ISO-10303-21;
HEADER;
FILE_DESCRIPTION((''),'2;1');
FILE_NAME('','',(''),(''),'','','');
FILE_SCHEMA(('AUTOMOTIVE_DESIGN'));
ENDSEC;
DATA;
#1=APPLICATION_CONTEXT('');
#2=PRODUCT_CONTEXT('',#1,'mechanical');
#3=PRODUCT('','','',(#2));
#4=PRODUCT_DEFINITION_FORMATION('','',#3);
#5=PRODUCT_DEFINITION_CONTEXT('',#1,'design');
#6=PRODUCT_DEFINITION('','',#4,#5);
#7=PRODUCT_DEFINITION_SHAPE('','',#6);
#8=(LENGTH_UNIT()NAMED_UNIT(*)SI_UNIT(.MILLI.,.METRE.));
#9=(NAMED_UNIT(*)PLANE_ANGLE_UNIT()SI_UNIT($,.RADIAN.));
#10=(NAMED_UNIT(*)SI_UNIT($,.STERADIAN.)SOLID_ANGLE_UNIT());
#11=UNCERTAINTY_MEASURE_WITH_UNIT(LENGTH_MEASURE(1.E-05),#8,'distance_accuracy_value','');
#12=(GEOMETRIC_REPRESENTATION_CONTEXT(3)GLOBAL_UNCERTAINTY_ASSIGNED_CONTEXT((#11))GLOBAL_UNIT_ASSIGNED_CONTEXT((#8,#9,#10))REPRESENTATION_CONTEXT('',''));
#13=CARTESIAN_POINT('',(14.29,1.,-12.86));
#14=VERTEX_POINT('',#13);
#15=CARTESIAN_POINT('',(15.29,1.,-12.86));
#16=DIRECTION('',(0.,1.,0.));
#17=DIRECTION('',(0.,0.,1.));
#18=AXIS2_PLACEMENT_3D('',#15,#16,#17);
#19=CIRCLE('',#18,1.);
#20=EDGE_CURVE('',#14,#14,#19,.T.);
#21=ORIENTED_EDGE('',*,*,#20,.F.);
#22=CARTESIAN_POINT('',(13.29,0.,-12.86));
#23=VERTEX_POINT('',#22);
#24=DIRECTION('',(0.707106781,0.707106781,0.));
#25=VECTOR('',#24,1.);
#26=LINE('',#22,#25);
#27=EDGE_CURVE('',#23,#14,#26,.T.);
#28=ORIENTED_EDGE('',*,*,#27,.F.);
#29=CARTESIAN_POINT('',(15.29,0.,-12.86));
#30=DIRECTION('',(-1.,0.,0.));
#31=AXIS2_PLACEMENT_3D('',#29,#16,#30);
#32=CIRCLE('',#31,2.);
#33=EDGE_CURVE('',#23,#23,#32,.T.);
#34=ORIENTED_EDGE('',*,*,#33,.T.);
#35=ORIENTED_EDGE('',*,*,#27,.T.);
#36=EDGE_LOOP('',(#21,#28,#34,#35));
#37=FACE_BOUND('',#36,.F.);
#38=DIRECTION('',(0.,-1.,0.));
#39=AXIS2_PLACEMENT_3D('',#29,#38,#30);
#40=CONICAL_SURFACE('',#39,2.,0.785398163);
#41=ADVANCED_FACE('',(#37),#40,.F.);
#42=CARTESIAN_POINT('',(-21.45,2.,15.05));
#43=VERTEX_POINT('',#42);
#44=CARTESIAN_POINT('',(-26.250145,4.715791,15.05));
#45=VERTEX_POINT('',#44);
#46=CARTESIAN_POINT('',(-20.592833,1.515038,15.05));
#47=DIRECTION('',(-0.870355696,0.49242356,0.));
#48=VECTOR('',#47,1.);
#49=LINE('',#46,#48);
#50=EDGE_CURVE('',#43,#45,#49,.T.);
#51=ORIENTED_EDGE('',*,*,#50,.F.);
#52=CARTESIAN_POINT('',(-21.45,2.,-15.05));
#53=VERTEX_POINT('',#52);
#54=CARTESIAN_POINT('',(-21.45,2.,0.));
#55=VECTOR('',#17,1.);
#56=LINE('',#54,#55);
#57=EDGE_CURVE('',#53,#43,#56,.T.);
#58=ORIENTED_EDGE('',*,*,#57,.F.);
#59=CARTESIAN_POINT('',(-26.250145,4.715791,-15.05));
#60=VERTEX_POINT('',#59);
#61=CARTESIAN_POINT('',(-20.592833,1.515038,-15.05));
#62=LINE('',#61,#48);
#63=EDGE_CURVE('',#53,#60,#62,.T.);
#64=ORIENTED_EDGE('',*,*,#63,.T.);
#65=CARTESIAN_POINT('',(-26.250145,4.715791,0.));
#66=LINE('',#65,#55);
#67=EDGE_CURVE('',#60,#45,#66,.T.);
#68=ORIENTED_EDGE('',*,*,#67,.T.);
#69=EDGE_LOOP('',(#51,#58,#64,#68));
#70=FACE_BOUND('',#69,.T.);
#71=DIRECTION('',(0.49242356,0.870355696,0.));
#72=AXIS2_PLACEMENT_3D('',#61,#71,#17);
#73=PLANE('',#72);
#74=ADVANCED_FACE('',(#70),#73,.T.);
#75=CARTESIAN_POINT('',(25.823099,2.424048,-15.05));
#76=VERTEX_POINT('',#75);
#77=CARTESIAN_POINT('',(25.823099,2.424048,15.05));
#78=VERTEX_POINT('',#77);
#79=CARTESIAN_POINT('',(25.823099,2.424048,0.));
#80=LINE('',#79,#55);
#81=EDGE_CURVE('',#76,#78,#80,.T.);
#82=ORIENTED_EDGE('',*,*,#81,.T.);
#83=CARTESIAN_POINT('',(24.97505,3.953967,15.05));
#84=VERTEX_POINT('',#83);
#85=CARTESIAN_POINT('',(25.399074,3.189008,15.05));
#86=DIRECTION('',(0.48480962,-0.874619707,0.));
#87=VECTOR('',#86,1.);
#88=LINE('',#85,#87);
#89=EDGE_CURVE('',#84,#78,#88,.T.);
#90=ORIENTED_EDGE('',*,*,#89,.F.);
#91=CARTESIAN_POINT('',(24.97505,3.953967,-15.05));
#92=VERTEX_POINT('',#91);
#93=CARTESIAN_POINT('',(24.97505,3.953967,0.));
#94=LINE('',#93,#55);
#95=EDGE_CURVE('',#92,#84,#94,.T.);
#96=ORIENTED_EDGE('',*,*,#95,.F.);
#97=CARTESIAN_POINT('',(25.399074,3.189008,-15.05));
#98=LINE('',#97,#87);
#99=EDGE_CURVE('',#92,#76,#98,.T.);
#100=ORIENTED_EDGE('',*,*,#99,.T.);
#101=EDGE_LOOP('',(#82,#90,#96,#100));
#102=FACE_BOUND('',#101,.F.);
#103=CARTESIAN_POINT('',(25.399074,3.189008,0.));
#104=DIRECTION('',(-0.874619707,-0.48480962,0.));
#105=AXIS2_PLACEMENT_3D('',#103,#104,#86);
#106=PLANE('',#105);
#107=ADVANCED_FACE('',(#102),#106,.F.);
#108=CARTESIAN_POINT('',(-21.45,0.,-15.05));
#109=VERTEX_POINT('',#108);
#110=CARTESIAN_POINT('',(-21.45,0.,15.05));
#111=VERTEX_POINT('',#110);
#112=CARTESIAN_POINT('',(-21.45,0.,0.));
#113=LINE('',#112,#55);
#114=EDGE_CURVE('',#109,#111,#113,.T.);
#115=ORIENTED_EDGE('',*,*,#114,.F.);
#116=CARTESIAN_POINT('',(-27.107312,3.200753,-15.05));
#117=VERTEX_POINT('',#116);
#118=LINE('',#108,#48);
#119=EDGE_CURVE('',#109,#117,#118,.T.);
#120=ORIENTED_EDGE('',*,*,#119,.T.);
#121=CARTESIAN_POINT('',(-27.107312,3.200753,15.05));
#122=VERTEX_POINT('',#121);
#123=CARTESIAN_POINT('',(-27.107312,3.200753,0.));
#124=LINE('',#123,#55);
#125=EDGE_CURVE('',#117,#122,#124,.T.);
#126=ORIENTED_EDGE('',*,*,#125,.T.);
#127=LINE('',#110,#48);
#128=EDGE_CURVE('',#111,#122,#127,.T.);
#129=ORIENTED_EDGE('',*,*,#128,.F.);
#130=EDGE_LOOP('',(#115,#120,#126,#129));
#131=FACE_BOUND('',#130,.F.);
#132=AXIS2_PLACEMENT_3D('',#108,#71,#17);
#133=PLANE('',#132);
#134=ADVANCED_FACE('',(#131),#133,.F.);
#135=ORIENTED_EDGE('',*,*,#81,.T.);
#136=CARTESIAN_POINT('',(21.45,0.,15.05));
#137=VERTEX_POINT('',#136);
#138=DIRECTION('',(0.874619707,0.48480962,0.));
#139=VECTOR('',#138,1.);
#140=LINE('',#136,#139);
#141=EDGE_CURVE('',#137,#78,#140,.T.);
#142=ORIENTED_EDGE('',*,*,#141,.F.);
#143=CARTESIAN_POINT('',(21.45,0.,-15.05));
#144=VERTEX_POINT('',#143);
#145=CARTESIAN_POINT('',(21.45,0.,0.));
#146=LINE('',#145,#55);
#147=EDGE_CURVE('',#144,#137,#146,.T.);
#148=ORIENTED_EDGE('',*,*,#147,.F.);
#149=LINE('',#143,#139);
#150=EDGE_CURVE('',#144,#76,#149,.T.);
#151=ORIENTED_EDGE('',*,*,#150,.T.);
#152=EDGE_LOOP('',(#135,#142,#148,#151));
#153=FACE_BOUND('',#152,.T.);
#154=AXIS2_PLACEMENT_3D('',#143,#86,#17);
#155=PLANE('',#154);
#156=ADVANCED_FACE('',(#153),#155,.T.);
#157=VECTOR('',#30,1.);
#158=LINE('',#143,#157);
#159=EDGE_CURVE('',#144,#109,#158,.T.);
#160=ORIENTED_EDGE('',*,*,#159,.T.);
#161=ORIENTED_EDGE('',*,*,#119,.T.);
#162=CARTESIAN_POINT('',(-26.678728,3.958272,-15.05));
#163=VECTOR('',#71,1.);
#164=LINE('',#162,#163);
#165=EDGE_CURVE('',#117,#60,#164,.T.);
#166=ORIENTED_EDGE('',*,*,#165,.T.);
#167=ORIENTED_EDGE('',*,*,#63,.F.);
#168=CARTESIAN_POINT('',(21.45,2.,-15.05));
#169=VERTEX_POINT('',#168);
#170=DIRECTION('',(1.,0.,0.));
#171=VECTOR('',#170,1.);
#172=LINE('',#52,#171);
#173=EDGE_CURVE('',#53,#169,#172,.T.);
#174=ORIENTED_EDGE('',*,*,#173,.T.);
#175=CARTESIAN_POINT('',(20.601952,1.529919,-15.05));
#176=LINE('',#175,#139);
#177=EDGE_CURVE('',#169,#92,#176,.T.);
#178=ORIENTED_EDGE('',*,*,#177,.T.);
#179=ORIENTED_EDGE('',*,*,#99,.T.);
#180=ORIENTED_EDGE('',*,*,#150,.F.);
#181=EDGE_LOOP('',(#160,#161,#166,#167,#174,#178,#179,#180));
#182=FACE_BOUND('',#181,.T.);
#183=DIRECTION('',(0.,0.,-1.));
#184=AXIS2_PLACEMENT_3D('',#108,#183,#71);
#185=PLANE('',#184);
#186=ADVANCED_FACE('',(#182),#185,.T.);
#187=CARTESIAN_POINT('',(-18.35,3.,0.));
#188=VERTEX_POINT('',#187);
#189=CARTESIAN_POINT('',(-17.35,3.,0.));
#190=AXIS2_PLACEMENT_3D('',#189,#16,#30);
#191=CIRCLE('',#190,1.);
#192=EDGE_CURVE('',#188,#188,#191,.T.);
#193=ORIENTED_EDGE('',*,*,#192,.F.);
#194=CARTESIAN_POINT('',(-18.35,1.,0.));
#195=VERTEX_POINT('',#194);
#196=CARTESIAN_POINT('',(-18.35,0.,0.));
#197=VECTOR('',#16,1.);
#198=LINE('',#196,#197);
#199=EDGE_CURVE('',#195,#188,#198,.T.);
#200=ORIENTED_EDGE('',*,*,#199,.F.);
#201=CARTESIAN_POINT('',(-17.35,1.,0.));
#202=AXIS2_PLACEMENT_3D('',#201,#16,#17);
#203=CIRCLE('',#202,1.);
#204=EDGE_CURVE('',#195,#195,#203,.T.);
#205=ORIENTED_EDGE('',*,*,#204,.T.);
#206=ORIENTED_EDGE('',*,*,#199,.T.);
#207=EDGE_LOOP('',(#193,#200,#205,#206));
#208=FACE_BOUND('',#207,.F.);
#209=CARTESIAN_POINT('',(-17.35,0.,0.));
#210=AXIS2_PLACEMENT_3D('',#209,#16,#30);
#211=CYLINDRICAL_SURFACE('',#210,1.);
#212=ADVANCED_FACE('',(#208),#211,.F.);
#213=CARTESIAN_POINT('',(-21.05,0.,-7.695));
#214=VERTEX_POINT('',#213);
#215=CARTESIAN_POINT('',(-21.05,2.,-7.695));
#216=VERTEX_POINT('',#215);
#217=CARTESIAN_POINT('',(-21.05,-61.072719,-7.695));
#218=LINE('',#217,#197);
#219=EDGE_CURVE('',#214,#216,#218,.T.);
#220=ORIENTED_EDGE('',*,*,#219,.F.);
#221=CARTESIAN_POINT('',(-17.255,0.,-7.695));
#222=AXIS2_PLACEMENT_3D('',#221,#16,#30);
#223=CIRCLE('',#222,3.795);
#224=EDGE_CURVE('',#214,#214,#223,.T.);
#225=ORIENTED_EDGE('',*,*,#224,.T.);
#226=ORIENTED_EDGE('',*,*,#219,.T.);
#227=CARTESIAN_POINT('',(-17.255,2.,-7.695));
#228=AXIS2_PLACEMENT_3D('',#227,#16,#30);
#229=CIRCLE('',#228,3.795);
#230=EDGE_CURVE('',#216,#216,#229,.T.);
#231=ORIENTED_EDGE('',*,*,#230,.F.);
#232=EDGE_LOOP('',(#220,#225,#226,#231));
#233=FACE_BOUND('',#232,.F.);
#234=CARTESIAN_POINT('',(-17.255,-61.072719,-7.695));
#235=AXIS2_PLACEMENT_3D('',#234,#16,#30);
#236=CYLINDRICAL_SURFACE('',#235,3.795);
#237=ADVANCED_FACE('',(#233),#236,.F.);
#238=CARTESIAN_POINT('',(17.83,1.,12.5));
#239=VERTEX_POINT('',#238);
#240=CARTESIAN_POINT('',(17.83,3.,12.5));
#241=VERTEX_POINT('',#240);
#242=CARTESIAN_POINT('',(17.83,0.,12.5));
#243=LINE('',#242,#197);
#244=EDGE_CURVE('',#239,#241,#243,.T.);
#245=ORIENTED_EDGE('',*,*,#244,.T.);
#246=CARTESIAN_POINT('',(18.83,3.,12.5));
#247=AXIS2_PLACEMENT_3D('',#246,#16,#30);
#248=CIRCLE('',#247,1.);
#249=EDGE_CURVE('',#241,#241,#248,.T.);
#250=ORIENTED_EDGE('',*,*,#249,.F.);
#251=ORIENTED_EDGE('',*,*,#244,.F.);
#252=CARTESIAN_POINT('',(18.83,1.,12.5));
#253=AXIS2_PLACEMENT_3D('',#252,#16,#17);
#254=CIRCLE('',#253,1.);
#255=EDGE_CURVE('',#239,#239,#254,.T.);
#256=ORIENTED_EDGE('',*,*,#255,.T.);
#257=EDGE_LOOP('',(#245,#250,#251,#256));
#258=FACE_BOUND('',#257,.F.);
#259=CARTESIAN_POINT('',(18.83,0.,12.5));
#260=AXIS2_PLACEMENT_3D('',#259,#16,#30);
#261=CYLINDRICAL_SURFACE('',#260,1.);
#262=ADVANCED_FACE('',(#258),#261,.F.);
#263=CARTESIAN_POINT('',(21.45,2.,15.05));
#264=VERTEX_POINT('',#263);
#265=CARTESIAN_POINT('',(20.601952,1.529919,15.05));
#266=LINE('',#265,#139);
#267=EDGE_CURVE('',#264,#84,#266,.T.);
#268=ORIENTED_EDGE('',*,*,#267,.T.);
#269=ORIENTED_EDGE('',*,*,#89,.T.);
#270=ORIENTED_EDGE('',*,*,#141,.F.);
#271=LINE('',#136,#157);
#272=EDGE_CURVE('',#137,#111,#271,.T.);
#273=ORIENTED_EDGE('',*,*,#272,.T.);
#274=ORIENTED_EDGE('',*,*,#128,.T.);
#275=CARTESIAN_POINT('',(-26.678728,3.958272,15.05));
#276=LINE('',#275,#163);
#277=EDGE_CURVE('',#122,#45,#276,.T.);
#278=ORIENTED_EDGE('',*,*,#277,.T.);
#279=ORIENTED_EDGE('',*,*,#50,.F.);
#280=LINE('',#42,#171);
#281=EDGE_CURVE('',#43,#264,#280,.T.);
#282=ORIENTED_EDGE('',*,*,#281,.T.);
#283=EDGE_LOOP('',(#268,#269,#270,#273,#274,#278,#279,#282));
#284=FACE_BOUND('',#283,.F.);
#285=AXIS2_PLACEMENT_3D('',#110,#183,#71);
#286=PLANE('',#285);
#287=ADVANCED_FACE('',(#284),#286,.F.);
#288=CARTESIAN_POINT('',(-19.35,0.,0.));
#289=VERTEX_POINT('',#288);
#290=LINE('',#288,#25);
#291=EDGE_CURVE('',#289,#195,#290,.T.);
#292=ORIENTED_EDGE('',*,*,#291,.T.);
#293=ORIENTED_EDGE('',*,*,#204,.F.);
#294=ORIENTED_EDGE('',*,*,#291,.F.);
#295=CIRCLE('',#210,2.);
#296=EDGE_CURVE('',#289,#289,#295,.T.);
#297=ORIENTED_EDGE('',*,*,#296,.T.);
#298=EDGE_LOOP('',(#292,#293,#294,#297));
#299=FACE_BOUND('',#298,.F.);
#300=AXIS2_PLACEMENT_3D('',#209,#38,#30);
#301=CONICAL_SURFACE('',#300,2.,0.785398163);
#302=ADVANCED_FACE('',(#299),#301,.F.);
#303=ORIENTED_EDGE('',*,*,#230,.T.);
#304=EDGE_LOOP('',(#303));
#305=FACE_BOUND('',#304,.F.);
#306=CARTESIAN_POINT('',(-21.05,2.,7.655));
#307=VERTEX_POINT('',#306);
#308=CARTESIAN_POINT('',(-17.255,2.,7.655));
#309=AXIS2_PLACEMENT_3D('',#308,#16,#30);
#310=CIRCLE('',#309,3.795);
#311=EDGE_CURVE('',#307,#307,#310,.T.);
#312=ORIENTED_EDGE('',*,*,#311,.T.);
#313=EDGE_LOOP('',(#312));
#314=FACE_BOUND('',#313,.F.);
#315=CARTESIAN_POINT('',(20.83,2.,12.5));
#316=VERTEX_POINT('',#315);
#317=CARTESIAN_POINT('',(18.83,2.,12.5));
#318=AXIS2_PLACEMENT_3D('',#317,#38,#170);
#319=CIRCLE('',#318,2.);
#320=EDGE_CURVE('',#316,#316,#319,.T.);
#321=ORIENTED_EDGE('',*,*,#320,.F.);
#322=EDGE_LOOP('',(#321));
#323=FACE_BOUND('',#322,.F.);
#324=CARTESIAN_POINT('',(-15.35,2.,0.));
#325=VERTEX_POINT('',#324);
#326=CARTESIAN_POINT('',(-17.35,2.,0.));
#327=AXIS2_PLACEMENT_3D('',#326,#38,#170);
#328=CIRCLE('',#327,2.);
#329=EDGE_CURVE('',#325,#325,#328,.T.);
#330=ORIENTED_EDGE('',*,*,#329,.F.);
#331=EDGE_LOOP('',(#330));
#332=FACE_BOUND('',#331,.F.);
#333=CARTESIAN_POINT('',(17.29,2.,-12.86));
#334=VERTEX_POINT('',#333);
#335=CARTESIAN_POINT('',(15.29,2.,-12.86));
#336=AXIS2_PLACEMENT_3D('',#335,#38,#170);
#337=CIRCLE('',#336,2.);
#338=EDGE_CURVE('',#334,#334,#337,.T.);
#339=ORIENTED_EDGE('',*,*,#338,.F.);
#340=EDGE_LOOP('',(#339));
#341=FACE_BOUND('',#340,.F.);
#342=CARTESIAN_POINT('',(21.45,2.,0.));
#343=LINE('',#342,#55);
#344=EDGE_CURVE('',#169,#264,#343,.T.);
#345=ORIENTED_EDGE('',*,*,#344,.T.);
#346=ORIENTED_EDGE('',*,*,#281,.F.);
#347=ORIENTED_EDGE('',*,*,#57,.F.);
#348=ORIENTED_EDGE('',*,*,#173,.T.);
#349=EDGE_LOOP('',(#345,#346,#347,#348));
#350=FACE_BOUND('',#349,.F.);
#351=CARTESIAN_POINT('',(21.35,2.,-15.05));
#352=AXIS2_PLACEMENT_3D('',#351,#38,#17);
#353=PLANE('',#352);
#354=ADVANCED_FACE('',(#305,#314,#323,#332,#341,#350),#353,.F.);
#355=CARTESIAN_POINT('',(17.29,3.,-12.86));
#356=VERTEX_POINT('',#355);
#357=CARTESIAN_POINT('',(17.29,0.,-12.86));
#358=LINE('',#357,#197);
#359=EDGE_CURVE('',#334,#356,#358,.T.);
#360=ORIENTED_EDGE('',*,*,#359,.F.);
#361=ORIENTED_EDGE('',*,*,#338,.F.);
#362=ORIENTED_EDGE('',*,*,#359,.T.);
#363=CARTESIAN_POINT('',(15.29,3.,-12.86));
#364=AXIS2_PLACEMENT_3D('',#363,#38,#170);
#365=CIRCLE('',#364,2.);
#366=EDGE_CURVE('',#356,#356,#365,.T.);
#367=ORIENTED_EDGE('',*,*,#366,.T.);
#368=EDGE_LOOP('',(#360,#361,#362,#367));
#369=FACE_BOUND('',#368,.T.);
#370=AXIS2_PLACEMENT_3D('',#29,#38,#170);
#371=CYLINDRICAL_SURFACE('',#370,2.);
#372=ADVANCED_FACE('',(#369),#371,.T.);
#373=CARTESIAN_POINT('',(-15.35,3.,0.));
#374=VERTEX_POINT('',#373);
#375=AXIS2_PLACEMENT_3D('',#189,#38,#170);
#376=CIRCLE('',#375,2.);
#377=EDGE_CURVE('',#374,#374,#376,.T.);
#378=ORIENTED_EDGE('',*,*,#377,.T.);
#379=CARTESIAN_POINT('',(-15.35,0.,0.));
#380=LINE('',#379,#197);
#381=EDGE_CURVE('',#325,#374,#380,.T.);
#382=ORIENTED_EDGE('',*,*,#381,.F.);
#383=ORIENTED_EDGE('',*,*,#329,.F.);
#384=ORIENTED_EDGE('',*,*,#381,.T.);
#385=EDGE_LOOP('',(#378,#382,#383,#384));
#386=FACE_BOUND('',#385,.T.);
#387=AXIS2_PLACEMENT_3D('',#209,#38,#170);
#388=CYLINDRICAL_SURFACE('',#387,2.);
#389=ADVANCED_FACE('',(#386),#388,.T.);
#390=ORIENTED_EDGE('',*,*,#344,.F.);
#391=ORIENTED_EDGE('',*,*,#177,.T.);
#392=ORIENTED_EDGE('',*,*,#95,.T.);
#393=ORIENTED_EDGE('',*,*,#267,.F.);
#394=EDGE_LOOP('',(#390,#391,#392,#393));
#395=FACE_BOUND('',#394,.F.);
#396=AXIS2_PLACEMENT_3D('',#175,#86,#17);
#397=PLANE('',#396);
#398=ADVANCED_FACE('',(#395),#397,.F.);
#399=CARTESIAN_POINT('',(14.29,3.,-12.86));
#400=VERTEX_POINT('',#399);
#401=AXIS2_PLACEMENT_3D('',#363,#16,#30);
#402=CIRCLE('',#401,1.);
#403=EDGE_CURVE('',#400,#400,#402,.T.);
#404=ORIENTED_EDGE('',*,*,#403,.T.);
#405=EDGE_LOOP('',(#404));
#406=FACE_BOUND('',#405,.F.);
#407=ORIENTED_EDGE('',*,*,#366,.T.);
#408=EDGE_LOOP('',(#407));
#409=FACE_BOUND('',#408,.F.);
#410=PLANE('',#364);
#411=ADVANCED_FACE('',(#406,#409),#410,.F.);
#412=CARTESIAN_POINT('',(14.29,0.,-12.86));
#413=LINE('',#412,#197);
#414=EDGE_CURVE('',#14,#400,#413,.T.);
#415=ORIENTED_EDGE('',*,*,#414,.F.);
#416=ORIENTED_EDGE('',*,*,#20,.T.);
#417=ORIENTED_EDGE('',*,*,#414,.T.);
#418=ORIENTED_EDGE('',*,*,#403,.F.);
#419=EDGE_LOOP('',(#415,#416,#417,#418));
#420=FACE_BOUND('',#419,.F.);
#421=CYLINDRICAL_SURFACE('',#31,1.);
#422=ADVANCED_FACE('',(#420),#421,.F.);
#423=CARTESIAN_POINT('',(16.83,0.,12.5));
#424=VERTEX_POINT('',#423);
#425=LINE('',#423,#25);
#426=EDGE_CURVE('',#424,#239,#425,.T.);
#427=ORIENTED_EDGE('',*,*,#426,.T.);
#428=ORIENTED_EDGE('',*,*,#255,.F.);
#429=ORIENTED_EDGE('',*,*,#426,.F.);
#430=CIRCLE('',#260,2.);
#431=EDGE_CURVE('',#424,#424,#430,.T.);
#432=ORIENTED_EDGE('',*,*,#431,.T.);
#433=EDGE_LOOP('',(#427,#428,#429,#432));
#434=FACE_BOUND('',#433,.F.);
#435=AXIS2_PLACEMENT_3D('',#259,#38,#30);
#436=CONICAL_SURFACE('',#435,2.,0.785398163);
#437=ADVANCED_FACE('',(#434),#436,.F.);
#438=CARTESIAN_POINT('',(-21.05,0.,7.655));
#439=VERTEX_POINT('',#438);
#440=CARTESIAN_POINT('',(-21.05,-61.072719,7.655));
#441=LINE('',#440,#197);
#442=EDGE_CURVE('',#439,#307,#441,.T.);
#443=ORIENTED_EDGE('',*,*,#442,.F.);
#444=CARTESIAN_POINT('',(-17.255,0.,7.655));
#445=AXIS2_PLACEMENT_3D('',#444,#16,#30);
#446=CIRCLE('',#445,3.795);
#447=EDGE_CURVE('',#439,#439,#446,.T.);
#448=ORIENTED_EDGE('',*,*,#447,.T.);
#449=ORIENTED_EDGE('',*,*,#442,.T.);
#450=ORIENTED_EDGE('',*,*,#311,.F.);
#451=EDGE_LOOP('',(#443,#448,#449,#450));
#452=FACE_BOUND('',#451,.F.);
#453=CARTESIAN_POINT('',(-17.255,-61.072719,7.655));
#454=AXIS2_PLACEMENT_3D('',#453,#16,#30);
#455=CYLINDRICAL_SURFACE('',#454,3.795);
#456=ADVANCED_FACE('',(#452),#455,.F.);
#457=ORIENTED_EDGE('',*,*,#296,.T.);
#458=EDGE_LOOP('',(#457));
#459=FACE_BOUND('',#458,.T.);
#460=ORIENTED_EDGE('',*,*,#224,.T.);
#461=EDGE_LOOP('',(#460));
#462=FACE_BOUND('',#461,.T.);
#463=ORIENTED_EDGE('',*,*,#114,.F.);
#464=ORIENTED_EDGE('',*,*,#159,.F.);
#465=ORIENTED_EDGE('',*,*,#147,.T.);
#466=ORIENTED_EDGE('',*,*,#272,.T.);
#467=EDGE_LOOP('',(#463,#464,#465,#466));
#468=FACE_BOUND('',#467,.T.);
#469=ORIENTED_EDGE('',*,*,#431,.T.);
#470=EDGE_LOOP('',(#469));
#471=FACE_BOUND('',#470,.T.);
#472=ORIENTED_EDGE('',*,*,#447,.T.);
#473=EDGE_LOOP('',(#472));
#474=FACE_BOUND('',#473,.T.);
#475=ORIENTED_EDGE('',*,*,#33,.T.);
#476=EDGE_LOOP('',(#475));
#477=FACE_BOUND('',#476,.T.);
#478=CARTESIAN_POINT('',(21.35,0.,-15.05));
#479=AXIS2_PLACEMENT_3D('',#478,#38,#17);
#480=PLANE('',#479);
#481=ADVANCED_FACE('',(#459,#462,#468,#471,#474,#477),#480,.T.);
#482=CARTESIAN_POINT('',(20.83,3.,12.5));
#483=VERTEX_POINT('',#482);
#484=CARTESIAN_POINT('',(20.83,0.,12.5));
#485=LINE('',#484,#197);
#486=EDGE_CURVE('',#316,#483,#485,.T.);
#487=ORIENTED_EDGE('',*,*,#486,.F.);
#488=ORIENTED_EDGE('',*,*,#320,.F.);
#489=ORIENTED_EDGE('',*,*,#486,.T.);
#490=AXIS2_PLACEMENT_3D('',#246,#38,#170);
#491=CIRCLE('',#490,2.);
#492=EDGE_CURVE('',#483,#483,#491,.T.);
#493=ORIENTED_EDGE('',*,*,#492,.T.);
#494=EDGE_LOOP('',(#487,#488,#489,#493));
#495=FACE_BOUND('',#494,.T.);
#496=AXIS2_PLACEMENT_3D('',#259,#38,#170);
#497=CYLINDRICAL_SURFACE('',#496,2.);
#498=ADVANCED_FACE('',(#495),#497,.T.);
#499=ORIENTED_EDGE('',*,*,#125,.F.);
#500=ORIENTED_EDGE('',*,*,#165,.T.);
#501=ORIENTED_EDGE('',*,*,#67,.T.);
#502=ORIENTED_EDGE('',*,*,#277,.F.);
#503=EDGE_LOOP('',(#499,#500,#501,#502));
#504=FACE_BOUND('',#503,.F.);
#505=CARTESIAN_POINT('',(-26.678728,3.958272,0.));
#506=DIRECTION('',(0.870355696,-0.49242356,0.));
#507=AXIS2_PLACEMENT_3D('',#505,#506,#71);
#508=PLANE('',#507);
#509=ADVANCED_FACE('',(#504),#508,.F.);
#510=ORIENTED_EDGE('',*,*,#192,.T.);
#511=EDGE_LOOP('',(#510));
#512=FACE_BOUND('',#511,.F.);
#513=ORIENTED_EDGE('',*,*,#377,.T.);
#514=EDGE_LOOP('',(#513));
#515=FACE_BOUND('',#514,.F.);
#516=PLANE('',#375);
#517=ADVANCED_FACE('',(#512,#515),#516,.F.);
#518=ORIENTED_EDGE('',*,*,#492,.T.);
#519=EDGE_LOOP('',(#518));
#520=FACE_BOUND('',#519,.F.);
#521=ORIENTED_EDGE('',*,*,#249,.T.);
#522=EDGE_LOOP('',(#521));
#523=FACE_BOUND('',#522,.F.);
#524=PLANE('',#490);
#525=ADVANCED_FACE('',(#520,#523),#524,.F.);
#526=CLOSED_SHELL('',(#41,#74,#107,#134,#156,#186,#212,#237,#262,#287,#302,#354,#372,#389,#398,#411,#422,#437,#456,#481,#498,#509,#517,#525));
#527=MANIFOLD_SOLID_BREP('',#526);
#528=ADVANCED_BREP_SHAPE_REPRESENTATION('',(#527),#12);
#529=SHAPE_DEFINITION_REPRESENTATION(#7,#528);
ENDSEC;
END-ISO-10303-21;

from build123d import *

# Parameters (mm, degrees)
F0_W            = 42.7
F0_H            = 30.1
F0_R            = 2
F1_DEPTH        = 2
F2_DEPTH        = 3
F3_DEPTH        = 0.1
F4_DEPTH        = 0.1
F6_W            = 1.7407113919
F6_H            = 30.1
F7_DEPTH        = 6.5
F9_W            = 1.7492394143
F9_H            = 30.1
F10_DEPTH       = 5
F11_D           = 2
F11_CSINK_D     = 4
F11_CSINK_ANGLE = 90
F12_D           = 7.59


# Not quite as in the source:
# - a feature names something its author has since deleted; it is built from what else it names


with BuildPart() as f1:
    # F0 (on Front) → F1 (new body)
    with BuildSketch(Plane.XZ):
        Rectangle(F0_W, F0_H)
        with Locations((-17.35, 0)):
            Circle(F0_R, mode=Mode.SUBTRACT)
        with Locations((15.29, -12.86)):
            Circle(F0_R, mode=Mode.SUBTRACT)
        with Locations((18.83, 12.5)):
            Circle(F0_R, mode=Mode.SUBTRACT)
        with Locations((18.83, 12.5)):
            Circle(F0_R)
        with Locations((-17.35, 0)):
            Circle(F0_R)
        with Locations((15.29, -12.86)):
            Circle(F0_R)
    extrude(amount=-F1_DEPTH)

    # F0 (on Front) → F2 (join)
    with BuildSketch(Plane.XZ):
        with Locations((18.83, 12.5)):
            Circle(F0_R)
        with Locations((15.29, -12.86)):
            Circle(F0_R)
        with Locations((-17.35, 0)):
            Circle(F0_R)
    extrude(amount=-F2_DEPTH)

    # F3 (add): a face of the model
    f3_faces = [f1.faces().sort_by_distance(p)[0] for p in [
        (-21.35, 1, 0),
    ]]
    extrude(f3_faces, amount=F3_DEPTH)

    # F4 (add): a face of the model
    f4_faces = [f1.faces().sort_by_distance(p)[0] for p in [
        (21.35, 1, 0),
    ]]
    extrude(f4_faces, amount=F4_DEPTH)

    # F6 (on face) → F7 (join)
    with BuildSketch(Plane(origin=(-16.2487833534, 9.1931193, 0), x_dir=(0.4924235601, 0.8703556959, 0), z_dir=(0.8703556959, -0.4924235601, 0))):
        with Locations((-9.6921296683, 0)):
            Rectangle(F6_W, F6_H)
    extrude(amount=-F7_DEPTH)

    # F9 (on face) → F10 (join)
    with BuildSketch(Plane(origin=(16.4083841089, 9.0953158313, 0), x_dir=(0.4848096202, -0.8746197071, 0), z_dir=(-0.8746197071, -0.4848096202, 0))):
        with Locations((9.5245466471, 0)):
            Rectangle(F9_W, F9_H)
    extrude(amount=-F10_DEPTH)

    # F11 (through all)
    with Locations(Plane.XZ):
        with Locations((-17.35, 0), (18.83, 12.5), (15.29, -12.86)):
            CounterSinkHole(F11_D / 2, F11_CSINK_D / 2, counter_sink_angle=F11_CSINK_ANGLE)

    # F12 (through all)
    with Locations(Plane.XZ):
        with Locations((-17.255, 7.655), (-17.255, -7.695)):
            Hole(F12_D / 2)


solid = f1.part
